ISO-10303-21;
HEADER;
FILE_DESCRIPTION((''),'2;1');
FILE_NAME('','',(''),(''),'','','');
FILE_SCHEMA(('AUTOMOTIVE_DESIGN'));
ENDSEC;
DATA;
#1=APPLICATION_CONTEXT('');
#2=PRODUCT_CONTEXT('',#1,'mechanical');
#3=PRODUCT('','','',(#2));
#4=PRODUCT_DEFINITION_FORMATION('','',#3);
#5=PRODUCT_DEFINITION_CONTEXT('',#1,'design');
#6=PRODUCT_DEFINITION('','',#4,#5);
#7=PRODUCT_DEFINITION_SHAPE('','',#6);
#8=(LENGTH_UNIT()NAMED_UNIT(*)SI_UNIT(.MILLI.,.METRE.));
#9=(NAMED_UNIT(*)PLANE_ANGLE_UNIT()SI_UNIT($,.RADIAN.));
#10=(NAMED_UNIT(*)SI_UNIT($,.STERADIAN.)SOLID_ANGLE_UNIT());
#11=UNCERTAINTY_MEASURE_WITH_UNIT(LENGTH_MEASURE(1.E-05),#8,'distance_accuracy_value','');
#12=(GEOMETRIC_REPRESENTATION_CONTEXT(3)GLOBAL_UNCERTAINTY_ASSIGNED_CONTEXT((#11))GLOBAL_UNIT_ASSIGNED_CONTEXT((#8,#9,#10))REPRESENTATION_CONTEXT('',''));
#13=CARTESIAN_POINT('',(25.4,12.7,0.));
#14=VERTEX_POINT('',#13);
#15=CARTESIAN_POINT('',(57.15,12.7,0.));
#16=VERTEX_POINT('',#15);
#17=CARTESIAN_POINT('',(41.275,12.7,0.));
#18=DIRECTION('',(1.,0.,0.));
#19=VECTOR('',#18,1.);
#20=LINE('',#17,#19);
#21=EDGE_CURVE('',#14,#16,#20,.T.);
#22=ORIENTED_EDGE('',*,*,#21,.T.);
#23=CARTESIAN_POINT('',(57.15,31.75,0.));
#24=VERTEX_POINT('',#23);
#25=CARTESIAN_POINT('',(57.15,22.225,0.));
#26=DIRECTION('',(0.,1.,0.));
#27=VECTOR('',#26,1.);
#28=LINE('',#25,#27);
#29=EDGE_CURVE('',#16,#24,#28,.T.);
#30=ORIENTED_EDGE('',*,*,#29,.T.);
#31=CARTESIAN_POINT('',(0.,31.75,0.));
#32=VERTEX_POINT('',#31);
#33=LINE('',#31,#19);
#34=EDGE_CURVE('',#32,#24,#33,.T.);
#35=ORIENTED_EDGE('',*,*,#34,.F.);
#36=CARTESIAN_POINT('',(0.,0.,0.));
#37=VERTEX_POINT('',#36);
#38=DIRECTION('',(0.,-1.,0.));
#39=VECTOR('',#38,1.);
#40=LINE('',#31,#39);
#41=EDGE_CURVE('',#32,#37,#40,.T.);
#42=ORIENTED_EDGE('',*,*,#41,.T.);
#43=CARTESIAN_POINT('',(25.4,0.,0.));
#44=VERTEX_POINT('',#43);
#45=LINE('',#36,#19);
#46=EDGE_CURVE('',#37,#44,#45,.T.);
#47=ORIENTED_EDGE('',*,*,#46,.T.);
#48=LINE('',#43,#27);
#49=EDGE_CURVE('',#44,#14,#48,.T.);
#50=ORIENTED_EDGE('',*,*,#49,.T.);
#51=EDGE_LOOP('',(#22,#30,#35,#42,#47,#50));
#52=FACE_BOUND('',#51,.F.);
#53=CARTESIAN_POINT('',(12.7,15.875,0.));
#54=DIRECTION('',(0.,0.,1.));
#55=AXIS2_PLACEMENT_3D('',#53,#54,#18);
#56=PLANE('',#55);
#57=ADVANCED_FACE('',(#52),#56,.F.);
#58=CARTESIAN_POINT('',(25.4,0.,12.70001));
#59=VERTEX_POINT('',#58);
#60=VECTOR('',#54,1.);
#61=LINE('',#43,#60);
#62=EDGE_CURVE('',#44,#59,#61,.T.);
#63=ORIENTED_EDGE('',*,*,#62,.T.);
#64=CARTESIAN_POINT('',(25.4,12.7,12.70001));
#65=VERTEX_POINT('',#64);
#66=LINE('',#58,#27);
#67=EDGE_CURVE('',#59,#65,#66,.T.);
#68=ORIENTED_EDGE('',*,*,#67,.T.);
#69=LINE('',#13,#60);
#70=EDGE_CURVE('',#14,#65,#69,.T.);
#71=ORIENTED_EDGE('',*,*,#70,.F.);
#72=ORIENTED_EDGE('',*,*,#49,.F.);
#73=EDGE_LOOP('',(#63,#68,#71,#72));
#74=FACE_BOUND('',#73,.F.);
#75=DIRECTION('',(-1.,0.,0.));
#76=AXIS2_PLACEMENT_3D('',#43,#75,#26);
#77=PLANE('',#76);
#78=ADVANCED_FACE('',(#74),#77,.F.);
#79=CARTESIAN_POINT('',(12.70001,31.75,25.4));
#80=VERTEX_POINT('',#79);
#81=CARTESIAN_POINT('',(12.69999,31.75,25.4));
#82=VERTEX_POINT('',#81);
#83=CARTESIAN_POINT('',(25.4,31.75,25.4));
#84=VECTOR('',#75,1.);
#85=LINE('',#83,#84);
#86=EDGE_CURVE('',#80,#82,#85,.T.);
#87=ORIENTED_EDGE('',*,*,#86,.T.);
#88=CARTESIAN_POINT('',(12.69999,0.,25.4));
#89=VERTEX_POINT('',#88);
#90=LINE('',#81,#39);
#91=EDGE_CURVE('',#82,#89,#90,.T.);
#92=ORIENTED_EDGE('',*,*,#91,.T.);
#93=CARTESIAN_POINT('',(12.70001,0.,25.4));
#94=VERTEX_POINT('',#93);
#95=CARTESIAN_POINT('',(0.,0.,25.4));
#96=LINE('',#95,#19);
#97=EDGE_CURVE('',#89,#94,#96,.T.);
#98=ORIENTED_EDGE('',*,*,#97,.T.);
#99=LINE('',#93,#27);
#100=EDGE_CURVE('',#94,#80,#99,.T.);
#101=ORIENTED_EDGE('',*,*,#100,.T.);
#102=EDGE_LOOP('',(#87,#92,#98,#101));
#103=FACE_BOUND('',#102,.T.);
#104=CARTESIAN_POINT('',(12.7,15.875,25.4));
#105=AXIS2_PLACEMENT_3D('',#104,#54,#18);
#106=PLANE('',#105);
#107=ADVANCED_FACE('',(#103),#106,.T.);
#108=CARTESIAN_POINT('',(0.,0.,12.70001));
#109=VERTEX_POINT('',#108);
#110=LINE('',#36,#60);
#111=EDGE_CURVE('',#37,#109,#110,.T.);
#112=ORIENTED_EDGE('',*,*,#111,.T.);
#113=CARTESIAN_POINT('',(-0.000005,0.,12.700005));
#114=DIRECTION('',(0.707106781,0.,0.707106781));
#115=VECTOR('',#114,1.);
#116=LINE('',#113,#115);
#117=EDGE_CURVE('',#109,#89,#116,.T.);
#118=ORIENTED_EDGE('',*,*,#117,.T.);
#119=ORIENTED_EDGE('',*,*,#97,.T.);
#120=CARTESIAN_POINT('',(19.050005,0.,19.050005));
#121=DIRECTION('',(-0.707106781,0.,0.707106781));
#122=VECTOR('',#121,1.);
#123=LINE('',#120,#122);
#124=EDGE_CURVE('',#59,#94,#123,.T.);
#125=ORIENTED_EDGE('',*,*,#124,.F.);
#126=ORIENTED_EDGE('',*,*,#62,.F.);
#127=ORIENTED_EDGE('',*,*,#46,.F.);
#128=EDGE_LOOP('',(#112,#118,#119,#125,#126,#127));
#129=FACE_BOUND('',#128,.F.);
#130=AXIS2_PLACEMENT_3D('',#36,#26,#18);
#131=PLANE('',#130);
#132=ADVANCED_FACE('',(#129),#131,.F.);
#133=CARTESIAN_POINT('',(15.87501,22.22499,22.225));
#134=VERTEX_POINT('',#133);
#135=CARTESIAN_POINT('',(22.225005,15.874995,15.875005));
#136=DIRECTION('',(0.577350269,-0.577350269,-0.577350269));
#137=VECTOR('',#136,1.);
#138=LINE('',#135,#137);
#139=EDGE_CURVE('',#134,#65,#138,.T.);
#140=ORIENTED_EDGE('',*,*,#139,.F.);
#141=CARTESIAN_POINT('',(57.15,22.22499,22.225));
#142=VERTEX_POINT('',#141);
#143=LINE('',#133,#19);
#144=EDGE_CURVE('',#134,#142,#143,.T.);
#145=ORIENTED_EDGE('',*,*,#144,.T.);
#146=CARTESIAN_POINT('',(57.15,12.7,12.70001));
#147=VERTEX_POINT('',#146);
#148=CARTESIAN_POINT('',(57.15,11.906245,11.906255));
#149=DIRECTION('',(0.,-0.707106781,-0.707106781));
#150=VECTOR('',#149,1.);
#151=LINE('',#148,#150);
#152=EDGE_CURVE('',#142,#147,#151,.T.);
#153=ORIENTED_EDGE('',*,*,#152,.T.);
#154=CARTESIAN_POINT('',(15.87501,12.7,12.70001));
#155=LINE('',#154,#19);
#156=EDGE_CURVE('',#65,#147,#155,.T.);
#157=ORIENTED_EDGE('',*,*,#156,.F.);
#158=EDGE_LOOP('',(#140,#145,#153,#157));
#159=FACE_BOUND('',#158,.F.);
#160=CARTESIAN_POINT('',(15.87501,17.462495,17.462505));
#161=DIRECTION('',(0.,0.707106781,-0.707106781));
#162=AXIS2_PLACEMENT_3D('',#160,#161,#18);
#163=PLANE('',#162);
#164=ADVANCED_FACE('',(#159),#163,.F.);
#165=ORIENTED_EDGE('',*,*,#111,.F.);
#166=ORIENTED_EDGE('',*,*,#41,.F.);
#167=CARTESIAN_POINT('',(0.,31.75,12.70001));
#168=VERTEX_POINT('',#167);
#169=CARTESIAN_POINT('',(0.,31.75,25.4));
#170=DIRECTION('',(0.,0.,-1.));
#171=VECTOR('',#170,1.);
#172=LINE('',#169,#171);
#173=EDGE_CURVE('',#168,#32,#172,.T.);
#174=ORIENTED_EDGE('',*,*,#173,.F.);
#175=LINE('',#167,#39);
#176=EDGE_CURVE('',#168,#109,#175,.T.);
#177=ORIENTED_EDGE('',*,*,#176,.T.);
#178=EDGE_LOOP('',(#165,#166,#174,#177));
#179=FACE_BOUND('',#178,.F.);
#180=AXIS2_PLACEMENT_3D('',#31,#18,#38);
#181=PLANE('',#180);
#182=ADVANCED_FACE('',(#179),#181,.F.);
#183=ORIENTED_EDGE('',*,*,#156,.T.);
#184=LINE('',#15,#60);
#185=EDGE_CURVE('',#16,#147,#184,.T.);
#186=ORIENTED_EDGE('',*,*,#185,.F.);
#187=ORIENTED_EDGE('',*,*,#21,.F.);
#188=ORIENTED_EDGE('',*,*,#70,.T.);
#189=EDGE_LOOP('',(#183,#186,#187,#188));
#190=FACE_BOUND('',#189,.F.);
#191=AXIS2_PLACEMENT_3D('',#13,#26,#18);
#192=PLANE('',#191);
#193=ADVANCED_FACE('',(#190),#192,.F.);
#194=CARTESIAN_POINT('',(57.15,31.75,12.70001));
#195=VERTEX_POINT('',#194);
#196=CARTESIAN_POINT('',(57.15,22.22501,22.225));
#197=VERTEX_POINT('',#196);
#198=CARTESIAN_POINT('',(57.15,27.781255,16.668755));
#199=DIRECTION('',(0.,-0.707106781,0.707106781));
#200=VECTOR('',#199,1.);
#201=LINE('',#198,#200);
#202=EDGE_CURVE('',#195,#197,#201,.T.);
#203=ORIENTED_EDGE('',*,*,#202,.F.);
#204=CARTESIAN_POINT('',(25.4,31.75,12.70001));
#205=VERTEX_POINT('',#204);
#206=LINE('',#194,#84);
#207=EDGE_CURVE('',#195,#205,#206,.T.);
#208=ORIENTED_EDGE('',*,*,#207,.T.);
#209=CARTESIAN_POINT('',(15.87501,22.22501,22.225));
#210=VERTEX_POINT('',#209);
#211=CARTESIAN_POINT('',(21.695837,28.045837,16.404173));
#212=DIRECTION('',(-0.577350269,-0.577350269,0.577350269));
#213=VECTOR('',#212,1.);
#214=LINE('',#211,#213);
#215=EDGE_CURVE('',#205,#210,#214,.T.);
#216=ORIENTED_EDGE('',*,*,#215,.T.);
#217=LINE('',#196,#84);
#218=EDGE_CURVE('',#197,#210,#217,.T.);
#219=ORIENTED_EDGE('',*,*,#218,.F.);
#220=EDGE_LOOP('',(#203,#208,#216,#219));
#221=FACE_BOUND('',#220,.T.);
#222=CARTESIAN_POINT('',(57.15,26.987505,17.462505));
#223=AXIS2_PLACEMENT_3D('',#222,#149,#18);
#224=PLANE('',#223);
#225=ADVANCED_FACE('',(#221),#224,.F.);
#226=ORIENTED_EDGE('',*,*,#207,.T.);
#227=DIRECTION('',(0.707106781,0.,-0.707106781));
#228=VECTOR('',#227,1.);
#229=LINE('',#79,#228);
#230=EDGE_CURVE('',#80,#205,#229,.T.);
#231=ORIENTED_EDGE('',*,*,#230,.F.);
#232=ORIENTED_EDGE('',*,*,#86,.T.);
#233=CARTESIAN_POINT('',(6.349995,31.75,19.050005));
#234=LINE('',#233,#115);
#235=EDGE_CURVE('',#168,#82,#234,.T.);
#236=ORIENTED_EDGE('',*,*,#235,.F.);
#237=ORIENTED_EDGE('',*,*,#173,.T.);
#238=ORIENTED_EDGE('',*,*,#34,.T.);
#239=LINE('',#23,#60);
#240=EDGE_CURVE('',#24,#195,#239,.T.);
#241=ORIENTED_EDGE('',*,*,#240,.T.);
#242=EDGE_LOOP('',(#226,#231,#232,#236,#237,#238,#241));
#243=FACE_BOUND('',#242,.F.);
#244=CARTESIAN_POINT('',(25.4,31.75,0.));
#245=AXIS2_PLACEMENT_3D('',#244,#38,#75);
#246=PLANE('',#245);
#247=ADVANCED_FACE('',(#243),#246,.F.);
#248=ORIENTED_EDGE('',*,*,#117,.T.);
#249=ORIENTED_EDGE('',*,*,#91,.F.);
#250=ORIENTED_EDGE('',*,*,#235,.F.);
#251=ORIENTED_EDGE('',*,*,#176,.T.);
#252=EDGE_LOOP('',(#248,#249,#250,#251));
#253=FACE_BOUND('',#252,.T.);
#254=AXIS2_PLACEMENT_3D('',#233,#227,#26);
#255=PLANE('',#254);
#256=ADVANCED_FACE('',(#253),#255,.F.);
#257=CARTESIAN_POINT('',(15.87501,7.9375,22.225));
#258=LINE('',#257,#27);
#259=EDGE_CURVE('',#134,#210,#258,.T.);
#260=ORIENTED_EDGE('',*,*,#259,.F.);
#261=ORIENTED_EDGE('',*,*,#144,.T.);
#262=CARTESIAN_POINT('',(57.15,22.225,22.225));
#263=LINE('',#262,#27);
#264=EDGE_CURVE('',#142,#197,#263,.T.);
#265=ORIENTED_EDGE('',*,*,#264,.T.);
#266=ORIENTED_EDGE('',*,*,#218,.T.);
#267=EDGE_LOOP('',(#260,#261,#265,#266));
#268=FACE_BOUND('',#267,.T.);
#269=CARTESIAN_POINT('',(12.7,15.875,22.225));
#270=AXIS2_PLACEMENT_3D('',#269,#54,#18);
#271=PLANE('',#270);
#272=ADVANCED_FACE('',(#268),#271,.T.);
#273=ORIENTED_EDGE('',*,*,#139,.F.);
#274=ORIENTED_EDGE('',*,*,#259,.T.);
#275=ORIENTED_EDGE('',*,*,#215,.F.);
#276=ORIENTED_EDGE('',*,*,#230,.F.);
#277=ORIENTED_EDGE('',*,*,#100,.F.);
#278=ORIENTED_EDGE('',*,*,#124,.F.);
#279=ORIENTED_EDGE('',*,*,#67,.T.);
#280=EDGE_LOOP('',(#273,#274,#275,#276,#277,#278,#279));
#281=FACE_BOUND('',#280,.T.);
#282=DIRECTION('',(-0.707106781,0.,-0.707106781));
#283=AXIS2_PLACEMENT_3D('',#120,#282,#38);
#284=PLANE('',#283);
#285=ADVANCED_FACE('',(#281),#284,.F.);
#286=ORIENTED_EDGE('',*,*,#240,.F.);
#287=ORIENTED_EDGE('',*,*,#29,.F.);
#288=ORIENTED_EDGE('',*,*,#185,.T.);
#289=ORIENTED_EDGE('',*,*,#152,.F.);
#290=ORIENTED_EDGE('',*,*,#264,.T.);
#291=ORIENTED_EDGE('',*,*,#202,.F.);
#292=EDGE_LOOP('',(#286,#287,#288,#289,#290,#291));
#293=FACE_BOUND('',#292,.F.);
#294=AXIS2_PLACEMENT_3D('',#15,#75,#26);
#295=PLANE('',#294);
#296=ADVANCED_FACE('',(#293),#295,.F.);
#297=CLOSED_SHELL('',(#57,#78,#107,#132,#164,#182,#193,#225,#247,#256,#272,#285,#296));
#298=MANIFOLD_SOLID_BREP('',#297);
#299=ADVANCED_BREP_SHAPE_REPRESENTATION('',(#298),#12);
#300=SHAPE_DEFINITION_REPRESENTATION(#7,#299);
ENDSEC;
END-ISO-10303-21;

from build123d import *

# Parameters (mm, degrees)
F1_DEPTH = 25.4
F0_W     = 31.75
F0_H     = 19.05
F2_DEPTH = 22.225
F3_SIZE  = 12.69999
F4_SIZE  = 9.52499


# Not quite as in the source:
# - a fillet or chamfer is up to 0.001 mm smaller than in the source, because OpenCascade refuses the exact size


with BuildPart() as f1:
    # F0 (on Top) → F1 (new body)
    with BuildSketch(Plane.XY):
        Polygon((0, 31.75), (0, 0), (25.4, 0), (25.4, 12.7), (25.4, 31.75), align=None)
    extrude(amount=F1_DEPTH)

    # F0 (on Top) → F2 (join)
    with BuildSketch(Plane.XY):
        Polygon((0, 31.75), (0, 0), (25.4, 0), (25.4, 12.7), (25.4, 31.75), align=None)
        with Locations((41.275, 22.225)):
            Rectangle(F0_W, F0_H)
    extrude(amount=F2_DEPTH)

    # F3 (size 12.7 in the source; OpenCascade refuses exactly that, so slightly less here)
    f3_edges = [f1.edges().sort_by_distance(p)[0] for p in [
        (25.4, 15.875, 25.4),
        (0, 15.875, 25.4),
    ]]
    chamfer(f3_edges, length=F3_SIZE)

    # F4 (size 9.525 in the source; OpenCascade refuses exactly that, so slightly less here)
    f4_edges = [f1.edges().sort_by_distance(p)[0] for p in [
        (36.512505, 12.7, 22.225),
        (36.512505, 31.75, 22.225),
    ]]
    chamfer(f4_edges, length=F4_SIZE)


solid = f1.part
